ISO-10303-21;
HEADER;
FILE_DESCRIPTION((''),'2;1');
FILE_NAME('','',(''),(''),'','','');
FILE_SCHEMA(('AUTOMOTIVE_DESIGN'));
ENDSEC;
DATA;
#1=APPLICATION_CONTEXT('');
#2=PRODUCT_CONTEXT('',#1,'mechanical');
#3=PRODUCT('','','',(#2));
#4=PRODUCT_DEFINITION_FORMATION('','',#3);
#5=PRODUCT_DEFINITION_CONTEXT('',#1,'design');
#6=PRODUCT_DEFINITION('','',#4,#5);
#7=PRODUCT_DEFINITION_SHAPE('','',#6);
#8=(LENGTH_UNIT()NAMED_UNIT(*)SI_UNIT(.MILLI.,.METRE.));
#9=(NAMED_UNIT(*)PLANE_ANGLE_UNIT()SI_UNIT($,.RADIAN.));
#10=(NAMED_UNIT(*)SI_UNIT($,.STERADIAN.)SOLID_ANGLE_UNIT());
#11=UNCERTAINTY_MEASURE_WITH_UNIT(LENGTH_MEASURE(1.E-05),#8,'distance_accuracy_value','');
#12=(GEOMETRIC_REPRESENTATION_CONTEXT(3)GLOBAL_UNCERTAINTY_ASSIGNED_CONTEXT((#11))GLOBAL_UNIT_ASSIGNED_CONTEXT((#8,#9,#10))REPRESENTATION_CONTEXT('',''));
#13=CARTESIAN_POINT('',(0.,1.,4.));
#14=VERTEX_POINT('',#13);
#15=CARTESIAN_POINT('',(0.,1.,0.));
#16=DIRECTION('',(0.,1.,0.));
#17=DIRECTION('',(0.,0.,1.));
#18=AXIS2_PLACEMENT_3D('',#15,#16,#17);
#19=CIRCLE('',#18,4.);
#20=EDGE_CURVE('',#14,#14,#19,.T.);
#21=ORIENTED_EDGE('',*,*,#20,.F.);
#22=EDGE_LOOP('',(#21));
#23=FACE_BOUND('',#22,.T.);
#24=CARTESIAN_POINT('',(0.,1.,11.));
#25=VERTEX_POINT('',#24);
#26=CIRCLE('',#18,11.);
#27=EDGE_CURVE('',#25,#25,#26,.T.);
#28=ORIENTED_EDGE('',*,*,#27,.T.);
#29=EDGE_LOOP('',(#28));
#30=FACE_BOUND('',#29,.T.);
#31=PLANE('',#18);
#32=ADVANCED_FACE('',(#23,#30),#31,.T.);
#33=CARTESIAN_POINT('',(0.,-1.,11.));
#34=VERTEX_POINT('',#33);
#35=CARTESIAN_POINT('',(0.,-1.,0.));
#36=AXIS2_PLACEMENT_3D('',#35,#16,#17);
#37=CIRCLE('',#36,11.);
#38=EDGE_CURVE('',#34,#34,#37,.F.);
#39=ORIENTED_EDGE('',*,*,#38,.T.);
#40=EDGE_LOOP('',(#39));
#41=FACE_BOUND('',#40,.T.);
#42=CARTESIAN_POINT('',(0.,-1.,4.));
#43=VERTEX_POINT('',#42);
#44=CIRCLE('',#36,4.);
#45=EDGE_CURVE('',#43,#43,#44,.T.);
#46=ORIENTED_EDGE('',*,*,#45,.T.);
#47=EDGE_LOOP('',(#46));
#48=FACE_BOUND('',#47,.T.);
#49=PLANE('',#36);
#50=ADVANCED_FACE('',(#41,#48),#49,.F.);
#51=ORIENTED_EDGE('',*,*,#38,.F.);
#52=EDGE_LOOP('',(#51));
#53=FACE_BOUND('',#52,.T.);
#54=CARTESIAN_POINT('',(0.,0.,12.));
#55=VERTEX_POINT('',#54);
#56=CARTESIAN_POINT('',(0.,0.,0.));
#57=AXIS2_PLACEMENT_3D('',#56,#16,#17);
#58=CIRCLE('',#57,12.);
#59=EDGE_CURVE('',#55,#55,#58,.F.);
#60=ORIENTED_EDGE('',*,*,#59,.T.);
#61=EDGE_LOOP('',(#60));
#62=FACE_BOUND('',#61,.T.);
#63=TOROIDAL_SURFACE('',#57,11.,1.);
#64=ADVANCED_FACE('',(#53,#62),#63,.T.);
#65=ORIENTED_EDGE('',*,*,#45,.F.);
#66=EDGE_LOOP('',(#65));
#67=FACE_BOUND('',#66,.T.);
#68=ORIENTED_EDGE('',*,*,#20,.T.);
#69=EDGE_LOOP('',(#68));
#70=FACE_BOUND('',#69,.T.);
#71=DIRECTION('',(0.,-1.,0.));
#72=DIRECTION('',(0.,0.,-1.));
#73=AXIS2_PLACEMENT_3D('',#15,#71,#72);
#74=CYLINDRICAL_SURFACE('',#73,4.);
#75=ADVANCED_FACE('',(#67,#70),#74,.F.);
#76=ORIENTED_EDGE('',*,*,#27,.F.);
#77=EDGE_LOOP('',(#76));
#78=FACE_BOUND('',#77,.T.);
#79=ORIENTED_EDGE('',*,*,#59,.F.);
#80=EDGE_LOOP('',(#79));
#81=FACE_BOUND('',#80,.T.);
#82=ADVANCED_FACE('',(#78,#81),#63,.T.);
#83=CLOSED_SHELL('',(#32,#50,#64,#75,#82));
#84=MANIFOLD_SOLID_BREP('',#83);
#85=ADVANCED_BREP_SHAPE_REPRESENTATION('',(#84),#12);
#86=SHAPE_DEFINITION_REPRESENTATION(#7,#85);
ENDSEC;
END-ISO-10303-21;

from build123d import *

# Parameters (mm, degrees)
SKETCH_1_R      = 12
SKETCH_1_R_2    = 4
EXTRUDE_1_DEPTH = 1
FILLET_1_R      = 1


with BuildPart() as part:
    # 草图1 → 凸台-拉伸1 (new, symmetric)
    with BuildSketch(Plane(origin=(0, 0, 0), x_dir=(1, 0, 0), z_dir=(0, 1, 0))):
        with Locations(Location((0, 0, 0), (0, 0, 270))):
            Circle(SKETCH_1_R)
        with Locations(Location((0, 0, 0), (0, 0, 270))):
            Circle(SKETCH_1_R_2, mode=Mode.SUBTRACT)
    extrude(amount=EXTRUDE_1_DEPTH, both=True)

    # 圆角1
    fillet_1_edges = [part.edges().sort_by_distance(p)[0] for p in [
        (0, -1, -12),
        (0, 1, -12),
    ]]
    fillet(fillet_1_edges, radius=FILLET_1_R - 0.0001)  # a hair under: the kernel refuses the full size


solid = part.part
